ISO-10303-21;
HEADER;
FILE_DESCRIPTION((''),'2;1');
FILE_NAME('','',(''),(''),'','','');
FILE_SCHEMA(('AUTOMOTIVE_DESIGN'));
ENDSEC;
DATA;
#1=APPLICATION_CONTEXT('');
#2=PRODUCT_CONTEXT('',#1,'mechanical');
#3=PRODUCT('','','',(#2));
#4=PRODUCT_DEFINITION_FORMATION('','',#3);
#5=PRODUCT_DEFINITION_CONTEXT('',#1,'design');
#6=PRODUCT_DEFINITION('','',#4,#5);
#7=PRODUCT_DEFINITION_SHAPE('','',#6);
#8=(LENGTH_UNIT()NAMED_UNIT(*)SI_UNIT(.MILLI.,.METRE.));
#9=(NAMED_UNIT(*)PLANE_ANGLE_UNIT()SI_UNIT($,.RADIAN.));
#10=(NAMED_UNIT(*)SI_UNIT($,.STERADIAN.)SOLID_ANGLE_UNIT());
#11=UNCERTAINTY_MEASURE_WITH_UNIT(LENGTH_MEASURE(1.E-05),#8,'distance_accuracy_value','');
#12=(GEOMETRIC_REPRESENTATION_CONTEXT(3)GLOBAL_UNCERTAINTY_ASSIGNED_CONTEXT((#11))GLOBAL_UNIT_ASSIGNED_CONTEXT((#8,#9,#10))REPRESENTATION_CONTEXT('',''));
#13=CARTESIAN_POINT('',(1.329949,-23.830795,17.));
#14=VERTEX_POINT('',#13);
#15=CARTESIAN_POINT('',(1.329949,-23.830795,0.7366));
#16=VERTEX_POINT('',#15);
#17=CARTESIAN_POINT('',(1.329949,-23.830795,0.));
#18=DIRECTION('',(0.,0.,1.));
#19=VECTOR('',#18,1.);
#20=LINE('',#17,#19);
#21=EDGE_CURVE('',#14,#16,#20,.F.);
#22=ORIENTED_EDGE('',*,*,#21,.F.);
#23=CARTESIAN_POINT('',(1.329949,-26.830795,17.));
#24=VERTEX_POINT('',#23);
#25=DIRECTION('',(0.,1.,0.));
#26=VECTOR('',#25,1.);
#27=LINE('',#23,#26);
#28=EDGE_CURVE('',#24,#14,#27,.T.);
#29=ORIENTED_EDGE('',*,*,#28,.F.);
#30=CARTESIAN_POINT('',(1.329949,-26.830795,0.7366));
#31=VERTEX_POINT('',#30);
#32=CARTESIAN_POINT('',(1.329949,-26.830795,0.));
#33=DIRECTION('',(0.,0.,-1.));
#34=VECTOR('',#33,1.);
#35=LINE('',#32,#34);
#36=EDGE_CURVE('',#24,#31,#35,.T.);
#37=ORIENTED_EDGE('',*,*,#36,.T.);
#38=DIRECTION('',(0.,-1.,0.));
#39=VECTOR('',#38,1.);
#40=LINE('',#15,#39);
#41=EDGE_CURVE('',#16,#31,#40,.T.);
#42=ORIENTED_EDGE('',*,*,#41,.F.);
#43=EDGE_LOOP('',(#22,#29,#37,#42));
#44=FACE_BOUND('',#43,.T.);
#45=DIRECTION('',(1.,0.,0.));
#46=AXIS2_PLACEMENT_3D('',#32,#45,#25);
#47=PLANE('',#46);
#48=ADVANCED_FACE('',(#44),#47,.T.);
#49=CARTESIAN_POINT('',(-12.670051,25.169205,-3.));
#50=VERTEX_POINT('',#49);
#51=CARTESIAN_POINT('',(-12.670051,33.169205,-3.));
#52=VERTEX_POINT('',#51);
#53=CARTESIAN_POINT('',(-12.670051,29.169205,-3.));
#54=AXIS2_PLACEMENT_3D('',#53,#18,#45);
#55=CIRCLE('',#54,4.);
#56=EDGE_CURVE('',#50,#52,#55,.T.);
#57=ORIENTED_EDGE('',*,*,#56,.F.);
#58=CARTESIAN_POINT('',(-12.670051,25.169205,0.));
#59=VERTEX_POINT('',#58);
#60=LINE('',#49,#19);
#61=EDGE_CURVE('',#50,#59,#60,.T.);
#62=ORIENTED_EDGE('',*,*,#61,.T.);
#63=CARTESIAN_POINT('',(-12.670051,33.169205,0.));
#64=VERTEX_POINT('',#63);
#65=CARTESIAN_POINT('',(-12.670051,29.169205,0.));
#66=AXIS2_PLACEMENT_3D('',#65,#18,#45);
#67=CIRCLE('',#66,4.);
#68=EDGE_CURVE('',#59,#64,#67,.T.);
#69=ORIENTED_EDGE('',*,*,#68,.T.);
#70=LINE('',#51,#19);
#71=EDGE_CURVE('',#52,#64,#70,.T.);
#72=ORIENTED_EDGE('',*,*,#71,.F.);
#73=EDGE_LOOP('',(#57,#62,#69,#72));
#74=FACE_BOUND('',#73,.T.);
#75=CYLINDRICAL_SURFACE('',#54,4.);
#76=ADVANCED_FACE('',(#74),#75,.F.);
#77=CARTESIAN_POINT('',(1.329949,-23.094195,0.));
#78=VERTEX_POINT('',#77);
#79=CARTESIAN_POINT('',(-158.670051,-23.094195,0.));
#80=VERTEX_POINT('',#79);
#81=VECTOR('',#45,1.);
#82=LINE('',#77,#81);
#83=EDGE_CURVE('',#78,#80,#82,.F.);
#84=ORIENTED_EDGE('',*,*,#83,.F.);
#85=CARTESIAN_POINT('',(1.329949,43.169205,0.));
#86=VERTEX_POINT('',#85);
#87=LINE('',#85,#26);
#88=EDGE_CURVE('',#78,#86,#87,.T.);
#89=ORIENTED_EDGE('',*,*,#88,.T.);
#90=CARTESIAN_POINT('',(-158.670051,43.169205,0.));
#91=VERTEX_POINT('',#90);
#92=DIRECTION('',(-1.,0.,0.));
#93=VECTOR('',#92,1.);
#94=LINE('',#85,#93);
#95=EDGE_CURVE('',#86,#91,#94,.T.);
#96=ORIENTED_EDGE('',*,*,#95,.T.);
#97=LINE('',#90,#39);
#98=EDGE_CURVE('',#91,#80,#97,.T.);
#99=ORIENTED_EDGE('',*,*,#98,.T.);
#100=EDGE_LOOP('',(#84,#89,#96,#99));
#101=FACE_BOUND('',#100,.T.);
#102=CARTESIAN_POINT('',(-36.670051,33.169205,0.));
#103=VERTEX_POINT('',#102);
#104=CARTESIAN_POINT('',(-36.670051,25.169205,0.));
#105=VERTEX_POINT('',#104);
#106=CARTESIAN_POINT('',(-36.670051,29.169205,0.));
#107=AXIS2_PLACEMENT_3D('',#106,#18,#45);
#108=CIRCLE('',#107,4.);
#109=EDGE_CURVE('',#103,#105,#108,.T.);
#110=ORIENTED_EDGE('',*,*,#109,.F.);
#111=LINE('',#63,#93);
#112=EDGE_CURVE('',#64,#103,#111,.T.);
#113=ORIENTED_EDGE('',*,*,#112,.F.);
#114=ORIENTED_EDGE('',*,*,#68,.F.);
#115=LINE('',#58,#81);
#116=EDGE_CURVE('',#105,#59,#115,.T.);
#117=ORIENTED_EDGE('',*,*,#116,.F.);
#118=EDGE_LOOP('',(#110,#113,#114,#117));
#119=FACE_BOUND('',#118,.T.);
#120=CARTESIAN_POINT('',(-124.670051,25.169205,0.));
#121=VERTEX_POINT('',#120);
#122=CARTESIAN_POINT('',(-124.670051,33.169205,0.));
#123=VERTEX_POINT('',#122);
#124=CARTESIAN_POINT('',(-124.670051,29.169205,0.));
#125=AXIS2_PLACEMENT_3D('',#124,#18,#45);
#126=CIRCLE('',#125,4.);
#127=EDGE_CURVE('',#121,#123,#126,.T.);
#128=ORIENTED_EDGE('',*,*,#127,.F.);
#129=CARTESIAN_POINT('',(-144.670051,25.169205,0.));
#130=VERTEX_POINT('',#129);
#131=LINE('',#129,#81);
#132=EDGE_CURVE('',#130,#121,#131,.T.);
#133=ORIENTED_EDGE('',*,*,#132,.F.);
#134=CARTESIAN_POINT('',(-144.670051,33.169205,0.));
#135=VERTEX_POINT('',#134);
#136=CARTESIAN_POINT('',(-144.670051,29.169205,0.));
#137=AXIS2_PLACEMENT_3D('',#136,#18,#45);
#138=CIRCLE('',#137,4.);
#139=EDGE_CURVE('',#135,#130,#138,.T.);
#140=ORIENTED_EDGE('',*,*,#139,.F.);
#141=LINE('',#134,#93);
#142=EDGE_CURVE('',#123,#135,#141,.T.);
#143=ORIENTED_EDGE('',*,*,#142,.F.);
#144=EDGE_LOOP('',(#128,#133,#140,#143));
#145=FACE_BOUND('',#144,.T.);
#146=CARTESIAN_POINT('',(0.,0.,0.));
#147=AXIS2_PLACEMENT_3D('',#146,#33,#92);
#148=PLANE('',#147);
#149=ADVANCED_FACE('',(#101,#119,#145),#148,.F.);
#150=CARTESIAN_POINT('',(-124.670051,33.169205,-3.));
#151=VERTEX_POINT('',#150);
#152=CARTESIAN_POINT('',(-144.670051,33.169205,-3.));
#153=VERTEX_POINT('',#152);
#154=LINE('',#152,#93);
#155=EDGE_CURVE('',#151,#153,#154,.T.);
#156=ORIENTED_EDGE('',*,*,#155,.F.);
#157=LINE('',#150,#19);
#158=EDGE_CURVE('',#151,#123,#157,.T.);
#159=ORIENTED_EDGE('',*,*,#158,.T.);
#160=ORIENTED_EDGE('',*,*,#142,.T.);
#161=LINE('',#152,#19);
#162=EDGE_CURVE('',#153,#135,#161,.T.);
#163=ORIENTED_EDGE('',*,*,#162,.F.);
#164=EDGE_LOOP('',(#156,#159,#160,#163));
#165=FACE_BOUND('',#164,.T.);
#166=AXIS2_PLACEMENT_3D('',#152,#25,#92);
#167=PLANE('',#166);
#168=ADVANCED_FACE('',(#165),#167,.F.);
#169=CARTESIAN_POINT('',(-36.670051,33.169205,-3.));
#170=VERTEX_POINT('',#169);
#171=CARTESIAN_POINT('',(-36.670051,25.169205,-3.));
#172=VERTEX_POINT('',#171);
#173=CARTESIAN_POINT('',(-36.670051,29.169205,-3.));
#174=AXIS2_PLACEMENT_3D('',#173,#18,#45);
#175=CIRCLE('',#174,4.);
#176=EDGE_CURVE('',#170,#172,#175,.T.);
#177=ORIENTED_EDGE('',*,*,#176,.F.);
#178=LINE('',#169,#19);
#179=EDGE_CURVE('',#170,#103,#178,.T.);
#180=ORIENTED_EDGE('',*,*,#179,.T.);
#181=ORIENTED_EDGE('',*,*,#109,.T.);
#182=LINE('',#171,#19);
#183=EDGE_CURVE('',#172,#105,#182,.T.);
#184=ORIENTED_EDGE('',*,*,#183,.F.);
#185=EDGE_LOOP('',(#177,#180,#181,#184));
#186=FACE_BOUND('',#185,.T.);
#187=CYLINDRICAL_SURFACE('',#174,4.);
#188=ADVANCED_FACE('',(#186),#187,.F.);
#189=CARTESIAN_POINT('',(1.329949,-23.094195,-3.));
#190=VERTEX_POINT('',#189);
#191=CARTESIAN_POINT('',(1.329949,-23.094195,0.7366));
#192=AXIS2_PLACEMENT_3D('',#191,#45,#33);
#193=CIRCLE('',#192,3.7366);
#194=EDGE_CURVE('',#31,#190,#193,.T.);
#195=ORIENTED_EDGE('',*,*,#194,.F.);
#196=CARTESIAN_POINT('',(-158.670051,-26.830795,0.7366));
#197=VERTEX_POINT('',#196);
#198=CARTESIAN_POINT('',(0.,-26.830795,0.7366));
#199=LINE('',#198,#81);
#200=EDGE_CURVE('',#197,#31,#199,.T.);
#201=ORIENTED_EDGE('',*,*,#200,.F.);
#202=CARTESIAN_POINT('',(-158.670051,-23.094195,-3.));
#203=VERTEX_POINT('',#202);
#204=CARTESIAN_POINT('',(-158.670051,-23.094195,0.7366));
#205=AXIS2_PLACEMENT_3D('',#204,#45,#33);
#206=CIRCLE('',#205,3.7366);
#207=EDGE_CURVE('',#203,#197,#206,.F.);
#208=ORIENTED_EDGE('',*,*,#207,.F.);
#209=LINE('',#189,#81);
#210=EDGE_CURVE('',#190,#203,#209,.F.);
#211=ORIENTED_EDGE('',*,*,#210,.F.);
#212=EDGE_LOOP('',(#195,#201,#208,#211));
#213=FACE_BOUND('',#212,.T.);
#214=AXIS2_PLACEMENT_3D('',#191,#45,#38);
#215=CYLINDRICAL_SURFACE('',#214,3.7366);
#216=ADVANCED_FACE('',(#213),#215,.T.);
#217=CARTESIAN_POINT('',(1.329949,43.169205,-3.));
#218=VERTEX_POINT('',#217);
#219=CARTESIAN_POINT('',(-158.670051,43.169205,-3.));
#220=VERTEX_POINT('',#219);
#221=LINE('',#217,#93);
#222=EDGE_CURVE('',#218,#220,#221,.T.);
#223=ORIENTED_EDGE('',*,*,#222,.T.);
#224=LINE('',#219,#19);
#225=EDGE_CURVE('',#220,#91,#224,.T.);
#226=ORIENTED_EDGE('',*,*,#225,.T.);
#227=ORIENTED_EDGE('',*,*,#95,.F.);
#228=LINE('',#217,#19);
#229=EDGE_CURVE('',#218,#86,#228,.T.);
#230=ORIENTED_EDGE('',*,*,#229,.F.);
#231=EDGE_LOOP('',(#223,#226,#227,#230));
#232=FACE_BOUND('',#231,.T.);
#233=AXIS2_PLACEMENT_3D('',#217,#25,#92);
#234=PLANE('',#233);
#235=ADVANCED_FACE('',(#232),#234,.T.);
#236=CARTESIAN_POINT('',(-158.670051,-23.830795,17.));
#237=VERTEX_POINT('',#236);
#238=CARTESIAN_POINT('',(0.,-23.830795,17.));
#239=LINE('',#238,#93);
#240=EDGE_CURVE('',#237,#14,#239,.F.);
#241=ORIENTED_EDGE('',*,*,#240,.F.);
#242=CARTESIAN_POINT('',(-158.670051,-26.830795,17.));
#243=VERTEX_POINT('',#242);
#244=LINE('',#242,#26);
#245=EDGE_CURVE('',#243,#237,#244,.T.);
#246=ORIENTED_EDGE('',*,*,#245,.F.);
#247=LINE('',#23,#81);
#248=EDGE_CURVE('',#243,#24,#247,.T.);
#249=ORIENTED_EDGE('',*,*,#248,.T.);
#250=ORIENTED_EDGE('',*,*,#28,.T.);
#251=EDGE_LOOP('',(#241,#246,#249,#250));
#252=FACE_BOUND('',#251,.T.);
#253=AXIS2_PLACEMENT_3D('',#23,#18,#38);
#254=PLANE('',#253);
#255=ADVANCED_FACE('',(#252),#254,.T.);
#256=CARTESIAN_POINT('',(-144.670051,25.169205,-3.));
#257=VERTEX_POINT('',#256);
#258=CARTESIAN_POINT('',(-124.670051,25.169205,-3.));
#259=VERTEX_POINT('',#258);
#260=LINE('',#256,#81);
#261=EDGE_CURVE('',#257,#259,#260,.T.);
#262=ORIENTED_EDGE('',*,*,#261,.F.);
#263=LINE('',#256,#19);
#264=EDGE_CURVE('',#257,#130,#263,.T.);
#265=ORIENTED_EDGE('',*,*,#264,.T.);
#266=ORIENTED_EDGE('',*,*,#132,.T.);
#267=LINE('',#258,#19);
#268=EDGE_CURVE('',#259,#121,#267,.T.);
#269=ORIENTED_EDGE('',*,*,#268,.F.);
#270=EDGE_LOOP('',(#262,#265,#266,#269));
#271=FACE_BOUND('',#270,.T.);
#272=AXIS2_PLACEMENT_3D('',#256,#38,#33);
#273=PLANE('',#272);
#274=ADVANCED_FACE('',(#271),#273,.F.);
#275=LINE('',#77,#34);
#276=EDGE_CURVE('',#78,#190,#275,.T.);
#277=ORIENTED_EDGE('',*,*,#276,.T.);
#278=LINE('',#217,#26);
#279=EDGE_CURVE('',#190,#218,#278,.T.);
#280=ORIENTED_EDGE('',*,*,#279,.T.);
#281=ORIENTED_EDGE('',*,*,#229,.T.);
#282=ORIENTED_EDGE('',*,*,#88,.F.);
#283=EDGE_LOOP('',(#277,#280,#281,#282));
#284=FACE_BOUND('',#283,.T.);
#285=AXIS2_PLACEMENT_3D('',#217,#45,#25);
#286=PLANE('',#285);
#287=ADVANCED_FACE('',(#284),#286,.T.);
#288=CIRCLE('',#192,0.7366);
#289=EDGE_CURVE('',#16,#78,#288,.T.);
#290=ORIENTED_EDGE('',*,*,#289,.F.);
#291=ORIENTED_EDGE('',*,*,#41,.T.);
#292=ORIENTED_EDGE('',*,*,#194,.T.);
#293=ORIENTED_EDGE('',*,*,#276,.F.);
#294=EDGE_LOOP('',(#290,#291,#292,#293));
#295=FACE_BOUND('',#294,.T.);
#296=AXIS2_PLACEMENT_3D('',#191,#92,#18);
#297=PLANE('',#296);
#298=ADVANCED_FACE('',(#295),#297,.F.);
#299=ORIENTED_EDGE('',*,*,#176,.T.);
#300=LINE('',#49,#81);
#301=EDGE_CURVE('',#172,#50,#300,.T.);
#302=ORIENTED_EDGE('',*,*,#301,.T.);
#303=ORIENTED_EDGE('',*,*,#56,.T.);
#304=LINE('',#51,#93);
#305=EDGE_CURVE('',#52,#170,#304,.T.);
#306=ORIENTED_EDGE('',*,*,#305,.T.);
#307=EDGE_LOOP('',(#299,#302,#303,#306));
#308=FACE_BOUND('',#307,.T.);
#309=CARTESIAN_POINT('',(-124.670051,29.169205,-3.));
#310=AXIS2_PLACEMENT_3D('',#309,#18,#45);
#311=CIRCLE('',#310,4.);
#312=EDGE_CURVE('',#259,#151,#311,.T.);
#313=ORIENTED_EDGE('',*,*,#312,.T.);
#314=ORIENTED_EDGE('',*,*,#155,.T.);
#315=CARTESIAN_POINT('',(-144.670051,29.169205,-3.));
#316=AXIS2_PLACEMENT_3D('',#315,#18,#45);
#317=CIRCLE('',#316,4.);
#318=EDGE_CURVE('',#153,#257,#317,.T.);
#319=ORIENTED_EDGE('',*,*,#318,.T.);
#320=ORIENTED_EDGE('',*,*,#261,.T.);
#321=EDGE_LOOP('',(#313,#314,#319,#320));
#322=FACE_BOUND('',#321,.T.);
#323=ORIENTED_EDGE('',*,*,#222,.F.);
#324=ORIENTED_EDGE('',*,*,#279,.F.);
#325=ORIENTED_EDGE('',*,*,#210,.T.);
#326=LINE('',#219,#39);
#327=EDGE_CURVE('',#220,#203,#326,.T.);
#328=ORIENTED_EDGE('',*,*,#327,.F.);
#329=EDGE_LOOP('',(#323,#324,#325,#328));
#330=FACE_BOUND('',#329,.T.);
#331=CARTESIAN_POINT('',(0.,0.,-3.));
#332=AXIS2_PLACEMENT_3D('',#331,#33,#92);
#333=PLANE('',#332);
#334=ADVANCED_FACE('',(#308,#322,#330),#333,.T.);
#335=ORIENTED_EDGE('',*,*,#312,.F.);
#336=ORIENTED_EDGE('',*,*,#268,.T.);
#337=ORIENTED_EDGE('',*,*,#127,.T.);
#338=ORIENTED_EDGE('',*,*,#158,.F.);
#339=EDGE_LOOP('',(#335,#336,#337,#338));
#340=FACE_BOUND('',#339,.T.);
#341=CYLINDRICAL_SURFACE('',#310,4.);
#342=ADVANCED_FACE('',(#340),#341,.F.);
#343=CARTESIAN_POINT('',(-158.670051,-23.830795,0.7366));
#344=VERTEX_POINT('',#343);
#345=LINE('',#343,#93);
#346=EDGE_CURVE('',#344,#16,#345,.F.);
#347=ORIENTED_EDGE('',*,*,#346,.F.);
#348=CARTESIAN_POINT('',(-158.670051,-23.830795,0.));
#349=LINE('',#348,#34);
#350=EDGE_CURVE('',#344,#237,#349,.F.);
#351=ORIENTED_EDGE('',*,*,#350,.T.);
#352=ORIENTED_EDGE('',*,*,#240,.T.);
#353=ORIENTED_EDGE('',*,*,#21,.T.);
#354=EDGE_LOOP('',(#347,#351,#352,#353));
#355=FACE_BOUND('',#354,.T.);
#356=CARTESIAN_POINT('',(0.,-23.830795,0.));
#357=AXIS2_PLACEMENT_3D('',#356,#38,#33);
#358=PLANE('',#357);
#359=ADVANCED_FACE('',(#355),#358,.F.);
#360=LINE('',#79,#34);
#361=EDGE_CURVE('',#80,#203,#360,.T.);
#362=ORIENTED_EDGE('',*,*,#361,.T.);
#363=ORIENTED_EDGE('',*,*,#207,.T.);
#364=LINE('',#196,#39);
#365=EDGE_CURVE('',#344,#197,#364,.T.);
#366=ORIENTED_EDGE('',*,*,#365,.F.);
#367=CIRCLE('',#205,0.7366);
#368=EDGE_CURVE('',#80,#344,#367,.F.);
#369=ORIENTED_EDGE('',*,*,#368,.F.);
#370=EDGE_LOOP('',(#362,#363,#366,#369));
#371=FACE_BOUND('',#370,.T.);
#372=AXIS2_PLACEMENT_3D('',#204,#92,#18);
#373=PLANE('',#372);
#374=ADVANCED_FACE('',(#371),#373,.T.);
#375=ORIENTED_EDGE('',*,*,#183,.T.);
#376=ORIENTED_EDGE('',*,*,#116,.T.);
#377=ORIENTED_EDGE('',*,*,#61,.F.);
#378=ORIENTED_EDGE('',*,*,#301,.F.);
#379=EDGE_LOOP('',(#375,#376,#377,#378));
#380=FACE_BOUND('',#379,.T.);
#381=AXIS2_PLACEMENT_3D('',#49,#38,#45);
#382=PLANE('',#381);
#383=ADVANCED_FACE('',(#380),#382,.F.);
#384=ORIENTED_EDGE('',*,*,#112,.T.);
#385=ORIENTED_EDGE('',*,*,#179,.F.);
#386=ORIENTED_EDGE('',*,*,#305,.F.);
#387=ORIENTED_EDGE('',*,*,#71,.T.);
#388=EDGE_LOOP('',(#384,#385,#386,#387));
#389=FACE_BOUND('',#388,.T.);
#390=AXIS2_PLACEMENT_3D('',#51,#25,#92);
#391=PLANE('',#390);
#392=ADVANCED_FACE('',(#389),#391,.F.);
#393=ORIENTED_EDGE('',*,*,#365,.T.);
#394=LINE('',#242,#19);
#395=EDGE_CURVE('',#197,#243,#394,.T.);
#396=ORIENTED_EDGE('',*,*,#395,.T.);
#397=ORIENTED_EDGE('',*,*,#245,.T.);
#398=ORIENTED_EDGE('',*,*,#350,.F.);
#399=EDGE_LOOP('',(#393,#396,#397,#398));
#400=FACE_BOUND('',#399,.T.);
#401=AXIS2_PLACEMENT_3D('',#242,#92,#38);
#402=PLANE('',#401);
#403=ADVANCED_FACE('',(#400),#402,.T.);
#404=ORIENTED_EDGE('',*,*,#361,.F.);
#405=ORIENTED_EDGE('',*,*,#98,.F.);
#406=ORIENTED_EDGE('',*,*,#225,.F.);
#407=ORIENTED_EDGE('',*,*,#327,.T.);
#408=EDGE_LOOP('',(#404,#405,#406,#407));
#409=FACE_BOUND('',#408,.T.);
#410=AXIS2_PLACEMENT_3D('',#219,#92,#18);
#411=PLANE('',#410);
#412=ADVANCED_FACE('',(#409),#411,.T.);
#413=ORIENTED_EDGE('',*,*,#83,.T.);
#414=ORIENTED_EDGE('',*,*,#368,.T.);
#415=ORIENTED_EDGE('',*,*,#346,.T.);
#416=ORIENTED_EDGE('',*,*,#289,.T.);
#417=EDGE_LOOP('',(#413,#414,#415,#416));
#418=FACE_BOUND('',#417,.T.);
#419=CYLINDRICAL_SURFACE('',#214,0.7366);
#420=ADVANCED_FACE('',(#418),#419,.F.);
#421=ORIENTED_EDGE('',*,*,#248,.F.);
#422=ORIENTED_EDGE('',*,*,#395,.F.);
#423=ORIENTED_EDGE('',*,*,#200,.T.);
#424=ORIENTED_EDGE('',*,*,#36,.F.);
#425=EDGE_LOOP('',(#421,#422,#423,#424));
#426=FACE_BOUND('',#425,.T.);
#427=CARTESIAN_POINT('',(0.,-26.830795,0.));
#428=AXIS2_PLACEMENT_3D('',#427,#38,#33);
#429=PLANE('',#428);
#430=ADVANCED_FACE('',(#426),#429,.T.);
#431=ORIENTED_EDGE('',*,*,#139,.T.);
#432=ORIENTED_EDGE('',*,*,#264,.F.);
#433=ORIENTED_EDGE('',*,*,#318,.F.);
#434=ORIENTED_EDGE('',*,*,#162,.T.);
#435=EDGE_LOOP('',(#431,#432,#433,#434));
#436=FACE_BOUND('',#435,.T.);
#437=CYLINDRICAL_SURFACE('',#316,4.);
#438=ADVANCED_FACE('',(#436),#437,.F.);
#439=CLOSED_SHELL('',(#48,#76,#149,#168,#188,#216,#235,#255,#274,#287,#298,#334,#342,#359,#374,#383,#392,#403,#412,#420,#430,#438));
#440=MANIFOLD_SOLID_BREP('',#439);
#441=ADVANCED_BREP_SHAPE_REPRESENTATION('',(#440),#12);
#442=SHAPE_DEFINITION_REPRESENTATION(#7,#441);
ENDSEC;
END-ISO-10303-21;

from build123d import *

# Parameters (mm, degrees)
SKETCH2_W                    = 160
SKETCH2_H                    = 70
BASE_FLANGE1_DEPTH           = 3
EDGE_FLANGE1_STRIP_W         = 13.4732
EDGE_FLANGE1_STRIP_H         = 3
EDGE_FLANGE1_STRIP_CUT_DEPTH = 160
EDGE_FLANGE1_DEPTH           = 160


# Sheet-metal steps are written as plain solids
with BuildPart() as part:
    # Sketch2 → Base-Flange1 (new body)
    with BuildSketch(Plane.XY):
        with Locations((-78.670050761, 8.169204738)):
            Rectangle(SKETCH2_W, SKETCH2_H)
        with BuildLine():
            Line((-144.670050761, 33.169204738), (-124.670050761, 33.169204738))
            ThreePointArc((-124.670050761, 33.169204738), (-120.670050761, 29.169204738), (-124.670050761, 25.169204738))
            Line((-124.670050761, 25.169204738), (-144.670050761, 25.169204738))
            ThreePointArc((-144.670050761, 25.169204738), (-148.670050761, 29.169204738), (-144.670050761, 33.169204738))
        make_face(mode=Mode.SUBTRACT)
        with BuildLine():
            Line((-12.670050761, 25.169204738), (-36.670050761, 25.169204738))
            ThreePointArc((-36.670050761, 25.169204738), (-40.670050761, 29.169204738), (-36.670050761, 33.169204738))
            Line((-36.670050761, 33.169204738), (-12.670050761, 33.169204738))
            ThreePointArc((-12.670050761, 33.169204738), (-8.670050761, 29.169204738), (-12.670050761, 25.169204738))
        make_face(mode=Mode.SUBTRACT)
    extrude(amount=-BASE_FLANGE1_DEPTH)

    # Edge-Flange1 strip (across the edge) → Edge-Flange1 strip cut (cut)
    with BuildSketch(Plane(origin=(-158.670050761, -26.830795262, 0), x_dir=(0, 1, 0), z_dir=(1, 0, 0))):
        with Locations((-3, -1.5)):
            Rectangle(EDGE_FLANGE1_STRIP_W, EDGE_FLANGE1_STRIP_H)
    extrude(amount=EDGE_FLANGE1_STRIP_CUT_DEPTH, mode=Mode.SUBTRACT)

    # Edge-Flange1 section (across the edge) → Edge-Flange1 (add)
    with BuildSketch(Plane(origin=(-158.670050761, -26.830795262, 0), x_dir=(0, 1, 0), z_dir=(1, 0, 0))):
        with BuildLine():
            Line((0, 0.7366), (0, 17))
            Line((0, 17), (3, 17))
            Line((3, 17), (3, 0.7366))
            ThreePointArc((3, 0.7366), (3.215745145, 0.215745145), (3.7366, 0))
            Line((3.7366, 0), (3.7366, -3))
            ThreePointArc((3.7366, -3), (1.094424801, -1.905575199), (0, 0.7366))
        make_face()
    extrude(amount=EDGE_FLANGE1_DEPTH)


solid = part.part
